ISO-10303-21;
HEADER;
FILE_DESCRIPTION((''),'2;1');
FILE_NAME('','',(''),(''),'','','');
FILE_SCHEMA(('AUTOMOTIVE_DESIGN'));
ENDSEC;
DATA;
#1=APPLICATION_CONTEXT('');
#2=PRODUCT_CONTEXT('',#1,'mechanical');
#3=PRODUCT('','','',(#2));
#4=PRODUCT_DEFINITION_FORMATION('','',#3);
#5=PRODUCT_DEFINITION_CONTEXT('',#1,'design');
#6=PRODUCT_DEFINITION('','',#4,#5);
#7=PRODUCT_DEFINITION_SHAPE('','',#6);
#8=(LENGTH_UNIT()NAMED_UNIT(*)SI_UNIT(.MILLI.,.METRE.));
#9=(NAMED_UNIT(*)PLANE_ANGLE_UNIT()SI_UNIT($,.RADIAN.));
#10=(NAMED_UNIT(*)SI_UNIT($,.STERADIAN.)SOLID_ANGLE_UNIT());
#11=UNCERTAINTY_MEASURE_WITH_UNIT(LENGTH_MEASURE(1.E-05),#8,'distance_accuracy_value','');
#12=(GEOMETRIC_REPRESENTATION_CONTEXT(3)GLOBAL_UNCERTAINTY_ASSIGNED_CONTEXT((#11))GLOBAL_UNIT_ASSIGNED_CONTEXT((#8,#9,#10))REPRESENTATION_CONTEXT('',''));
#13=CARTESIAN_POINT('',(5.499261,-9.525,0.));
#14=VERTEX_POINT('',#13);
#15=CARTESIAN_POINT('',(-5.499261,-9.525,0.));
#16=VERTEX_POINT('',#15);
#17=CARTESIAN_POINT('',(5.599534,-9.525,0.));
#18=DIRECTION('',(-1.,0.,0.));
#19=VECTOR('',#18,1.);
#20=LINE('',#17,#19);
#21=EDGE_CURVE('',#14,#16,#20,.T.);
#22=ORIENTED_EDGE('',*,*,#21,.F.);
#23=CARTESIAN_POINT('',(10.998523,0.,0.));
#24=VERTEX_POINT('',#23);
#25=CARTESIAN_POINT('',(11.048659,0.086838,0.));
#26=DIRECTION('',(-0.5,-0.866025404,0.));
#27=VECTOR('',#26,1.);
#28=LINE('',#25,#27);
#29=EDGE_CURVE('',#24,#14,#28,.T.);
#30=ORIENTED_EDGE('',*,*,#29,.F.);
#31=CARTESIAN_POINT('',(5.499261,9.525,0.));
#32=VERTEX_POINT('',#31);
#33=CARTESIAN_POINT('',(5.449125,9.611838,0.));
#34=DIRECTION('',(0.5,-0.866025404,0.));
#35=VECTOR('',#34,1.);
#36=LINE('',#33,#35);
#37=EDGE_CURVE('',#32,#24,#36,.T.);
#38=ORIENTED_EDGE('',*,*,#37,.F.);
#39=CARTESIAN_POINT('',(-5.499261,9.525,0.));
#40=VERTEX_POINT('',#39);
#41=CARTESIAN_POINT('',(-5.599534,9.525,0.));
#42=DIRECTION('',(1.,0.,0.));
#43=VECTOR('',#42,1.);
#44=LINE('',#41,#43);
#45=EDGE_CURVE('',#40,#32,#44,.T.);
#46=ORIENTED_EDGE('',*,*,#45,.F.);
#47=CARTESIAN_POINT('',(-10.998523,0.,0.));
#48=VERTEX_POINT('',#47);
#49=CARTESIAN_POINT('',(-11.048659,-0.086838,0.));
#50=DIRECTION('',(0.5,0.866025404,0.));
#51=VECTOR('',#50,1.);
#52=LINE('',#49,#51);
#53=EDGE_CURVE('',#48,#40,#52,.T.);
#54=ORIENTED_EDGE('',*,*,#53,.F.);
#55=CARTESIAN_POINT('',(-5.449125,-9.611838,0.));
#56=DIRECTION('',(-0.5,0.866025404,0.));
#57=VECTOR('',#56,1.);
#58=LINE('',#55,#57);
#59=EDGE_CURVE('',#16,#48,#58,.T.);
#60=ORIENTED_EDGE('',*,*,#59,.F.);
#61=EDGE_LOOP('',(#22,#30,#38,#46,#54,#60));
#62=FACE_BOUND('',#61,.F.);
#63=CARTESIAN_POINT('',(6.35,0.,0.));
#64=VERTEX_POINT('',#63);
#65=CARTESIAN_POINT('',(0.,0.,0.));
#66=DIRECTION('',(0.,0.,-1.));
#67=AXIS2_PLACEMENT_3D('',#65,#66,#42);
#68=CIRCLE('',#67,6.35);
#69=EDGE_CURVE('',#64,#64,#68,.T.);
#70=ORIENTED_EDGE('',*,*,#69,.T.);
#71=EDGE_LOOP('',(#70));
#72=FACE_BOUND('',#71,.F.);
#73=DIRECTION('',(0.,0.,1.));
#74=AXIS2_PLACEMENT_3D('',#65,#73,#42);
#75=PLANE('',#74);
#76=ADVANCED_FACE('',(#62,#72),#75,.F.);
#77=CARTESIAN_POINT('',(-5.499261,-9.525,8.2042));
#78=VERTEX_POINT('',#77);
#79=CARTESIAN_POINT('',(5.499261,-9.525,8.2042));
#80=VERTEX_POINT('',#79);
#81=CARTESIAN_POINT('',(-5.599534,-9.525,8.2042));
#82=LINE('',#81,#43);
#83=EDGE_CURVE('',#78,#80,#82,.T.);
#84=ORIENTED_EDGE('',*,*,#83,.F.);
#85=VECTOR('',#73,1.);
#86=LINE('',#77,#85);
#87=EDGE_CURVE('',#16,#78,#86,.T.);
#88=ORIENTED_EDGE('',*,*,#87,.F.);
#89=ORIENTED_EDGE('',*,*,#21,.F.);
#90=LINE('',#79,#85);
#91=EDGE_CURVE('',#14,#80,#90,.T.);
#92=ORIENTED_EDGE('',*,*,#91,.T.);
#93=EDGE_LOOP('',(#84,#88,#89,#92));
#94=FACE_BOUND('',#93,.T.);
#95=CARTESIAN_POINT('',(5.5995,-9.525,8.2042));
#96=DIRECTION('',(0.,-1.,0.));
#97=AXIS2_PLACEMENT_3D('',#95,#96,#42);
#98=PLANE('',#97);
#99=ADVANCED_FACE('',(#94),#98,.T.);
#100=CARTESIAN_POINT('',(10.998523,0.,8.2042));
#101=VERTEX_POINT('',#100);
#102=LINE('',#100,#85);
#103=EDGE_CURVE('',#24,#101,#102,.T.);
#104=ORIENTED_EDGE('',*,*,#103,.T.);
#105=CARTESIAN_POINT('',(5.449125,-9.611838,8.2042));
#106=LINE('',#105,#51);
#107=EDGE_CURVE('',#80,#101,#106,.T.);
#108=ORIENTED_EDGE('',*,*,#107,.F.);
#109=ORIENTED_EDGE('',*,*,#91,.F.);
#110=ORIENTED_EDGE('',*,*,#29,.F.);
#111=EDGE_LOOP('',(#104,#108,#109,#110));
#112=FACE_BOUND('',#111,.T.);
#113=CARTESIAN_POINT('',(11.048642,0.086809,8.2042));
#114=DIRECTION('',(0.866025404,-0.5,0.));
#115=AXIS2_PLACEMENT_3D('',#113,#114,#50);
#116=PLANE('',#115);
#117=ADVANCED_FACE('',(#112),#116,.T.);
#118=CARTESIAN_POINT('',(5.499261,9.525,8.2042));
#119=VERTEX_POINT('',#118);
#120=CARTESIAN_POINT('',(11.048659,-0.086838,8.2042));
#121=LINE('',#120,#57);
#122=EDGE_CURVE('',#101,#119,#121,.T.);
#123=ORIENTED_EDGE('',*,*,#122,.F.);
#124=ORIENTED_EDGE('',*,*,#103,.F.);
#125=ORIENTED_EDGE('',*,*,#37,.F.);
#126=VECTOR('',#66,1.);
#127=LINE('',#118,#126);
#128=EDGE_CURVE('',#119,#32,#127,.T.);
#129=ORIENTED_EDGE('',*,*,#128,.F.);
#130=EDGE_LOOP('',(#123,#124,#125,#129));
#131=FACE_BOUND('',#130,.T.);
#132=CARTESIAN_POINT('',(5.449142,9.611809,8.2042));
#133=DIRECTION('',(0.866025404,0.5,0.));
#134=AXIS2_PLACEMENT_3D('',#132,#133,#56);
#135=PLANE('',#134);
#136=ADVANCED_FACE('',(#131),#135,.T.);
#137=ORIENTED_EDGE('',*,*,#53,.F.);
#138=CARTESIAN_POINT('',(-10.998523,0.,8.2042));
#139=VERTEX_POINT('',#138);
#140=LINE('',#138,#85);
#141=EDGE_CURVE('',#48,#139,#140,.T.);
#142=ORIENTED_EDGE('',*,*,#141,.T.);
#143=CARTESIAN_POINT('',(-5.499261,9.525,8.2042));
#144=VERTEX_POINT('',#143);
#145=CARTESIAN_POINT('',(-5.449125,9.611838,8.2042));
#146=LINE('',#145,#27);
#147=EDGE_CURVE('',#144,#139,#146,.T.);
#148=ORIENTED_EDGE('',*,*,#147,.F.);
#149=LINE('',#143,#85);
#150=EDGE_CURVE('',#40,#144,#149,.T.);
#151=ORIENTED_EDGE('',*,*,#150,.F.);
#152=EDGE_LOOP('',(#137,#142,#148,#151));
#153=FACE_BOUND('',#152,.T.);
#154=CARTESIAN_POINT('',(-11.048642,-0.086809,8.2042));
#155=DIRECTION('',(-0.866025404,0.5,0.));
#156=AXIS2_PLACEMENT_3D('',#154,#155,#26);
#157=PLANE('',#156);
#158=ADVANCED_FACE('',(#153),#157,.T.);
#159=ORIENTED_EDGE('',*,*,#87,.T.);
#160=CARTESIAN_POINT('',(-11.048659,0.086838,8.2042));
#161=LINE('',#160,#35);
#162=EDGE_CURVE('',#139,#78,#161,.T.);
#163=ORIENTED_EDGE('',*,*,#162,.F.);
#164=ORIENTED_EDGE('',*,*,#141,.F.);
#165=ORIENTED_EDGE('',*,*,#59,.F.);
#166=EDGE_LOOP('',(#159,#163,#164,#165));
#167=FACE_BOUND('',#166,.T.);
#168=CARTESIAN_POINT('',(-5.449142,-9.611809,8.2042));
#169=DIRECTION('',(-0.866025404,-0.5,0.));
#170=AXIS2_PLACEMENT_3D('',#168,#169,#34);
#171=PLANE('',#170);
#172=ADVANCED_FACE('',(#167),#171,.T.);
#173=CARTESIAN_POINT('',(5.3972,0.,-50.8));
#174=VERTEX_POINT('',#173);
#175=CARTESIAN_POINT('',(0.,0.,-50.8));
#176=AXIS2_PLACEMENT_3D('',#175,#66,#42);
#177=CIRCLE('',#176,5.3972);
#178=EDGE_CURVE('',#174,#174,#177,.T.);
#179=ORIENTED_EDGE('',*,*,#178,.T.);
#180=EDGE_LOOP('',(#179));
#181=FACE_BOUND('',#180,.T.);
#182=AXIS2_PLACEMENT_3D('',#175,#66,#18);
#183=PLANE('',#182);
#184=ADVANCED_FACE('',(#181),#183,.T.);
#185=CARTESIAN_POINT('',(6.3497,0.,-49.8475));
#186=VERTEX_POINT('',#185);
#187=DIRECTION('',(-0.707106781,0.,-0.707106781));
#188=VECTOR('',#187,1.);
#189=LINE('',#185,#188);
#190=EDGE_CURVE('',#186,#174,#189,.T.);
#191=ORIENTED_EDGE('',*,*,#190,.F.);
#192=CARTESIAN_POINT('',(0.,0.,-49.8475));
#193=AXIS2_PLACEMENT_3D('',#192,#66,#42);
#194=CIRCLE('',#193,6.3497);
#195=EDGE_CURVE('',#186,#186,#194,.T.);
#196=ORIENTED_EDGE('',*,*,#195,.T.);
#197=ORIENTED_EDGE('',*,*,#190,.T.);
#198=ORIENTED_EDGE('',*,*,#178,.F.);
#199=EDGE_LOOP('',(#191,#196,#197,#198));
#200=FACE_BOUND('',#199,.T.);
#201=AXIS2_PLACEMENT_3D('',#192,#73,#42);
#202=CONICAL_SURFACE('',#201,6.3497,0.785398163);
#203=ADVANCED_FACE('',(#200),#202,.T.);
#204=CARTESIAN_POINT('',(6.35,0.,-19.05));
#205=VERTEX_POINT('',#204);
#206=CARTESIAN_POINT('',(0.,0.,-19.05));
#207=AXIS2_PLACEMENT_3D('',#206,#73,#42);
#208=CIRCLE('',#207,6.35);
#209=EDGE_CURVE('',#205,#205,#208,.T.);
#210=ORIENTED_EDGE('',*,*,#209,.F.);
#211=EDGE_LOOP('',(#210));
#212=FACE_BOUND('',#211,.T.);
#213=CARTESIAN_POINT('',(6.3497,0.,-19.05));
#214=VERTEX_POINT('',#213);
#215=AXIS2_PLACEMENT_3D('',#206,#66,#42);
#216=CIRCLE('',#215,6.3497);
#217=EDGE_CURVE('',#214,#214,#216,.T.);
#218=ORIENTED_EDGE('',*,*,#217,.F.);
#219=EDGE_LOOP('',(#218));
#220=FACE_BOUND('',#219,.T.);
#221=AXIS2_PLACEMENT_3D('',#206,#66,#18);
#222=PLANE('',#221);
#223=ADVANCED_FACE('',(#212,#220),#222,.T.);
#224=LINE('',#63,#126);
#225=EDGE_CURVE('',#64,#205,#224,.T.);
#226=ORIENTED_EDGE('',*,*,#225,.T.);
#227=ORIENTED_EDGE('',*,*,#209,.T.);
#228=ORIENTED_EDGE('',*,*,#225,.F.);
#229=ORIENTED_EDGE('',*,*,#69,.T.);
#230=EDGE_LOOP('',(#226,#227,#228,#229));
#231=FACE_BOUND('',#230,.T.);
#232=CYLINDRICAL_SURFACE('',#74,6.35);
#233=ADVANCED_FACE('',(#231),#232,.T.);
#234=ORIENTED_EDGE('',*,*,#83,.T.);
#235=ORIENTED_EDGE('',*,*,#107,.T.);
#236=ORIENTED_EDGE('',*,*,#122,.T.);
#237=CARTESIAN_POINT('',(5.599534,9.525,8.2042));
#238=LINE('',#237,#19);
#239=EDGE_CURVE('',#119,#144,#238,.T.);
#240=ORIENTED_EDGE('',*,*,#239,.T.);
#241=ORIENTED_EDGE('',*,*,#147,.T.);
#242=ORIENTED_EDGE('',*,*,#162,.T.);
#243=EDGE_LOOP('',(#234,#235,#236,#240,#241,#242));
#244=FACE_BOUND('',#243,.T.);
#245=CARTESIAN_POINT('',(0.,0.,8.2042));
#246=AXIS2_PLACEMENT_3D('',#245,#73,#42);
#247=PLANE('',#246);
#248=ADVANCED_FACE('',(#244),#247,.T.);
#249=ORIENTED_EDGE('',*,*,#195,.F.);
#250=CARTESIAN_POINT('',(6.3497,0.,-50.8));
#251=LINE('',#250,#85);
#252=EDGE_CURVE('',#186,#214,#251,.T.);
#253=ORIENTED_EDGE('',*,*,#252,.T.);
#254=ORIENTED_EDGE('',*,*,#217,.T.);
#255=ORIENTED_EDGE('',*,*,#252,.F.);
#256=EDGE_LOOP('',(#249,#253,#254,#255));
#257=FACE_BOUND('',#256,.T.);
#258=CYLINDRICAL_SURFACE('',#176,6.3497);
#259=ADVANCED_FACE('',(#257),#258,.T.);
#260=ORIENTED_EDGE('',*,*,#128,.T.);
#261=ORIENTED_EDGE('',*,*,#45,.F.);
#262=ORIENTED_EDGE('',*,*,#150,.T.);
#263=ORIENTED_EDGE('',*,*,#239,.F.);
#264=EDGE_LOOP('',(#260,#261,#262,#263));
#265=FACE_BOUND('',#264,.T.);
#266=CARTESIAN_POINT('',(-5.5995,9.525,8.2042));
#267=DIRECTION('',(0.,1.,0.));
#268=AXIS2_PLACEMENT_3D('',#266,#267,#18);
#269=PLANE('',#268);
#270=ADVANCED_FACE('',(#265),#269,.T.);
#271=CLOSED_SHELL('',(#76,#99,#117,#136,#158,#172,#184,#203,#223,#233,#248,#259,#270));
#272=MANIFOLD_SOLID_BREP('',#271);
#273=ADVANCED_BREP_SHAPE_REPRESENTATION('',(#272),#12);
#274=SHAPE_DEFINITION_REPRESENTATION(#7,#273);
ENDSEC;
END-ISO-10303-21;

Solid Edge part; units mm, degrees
sketch "Sketch1" plane through (0, 0, 0) normal (0, 0, 1) x (1, 0, 0)
  circle A0 centre (0, 0) radius 11.049
  dimension "D1" = 22.098
extrude "Protrusion1" add sketch "Sketch1" along normal blind 8.2042
sketch "Sketch2" plane through (0, 0, 0) normal (0, 0, -1) x (1, 0, 0)
  circle A0 centre (0, 0) radius 6.35
extrude "Protrusion2" add sketch "Sketch2" along normal blind 50.8
sketch "Sketch3" plane through (0, 0, -50.8) normal (0, 0, -1) x (1, 0, 0)
  circle A0 centre (0, 0) radius 6.3497
extrude "Cutout1" cut sketch "Sketch3" against normal blind 31.75 flip side to cut
chamfer "Chamfer_1" distance 0.9525 angle 45 1 edges at (-6.3497, 0, -50.8)
sketch "Sketch4" plane through (0, 0, 8.2042) normal (0, 0, 1) x (1, 0, 0)
  line L0 (-5.5995, 9.525) -> (5.5995, 9.525)
  dimension "D1" = 19.05
extrude "Cutout2" cut sketch "Sketch4" against normal up to next material side at (0, 9.575, 8.2042)
pattern_circular "Pattern1" count 6 over 360 about axis through (0, 0, 8.2042) along (0, 0, 1) of "Cutout2"
properties part number "121027"
